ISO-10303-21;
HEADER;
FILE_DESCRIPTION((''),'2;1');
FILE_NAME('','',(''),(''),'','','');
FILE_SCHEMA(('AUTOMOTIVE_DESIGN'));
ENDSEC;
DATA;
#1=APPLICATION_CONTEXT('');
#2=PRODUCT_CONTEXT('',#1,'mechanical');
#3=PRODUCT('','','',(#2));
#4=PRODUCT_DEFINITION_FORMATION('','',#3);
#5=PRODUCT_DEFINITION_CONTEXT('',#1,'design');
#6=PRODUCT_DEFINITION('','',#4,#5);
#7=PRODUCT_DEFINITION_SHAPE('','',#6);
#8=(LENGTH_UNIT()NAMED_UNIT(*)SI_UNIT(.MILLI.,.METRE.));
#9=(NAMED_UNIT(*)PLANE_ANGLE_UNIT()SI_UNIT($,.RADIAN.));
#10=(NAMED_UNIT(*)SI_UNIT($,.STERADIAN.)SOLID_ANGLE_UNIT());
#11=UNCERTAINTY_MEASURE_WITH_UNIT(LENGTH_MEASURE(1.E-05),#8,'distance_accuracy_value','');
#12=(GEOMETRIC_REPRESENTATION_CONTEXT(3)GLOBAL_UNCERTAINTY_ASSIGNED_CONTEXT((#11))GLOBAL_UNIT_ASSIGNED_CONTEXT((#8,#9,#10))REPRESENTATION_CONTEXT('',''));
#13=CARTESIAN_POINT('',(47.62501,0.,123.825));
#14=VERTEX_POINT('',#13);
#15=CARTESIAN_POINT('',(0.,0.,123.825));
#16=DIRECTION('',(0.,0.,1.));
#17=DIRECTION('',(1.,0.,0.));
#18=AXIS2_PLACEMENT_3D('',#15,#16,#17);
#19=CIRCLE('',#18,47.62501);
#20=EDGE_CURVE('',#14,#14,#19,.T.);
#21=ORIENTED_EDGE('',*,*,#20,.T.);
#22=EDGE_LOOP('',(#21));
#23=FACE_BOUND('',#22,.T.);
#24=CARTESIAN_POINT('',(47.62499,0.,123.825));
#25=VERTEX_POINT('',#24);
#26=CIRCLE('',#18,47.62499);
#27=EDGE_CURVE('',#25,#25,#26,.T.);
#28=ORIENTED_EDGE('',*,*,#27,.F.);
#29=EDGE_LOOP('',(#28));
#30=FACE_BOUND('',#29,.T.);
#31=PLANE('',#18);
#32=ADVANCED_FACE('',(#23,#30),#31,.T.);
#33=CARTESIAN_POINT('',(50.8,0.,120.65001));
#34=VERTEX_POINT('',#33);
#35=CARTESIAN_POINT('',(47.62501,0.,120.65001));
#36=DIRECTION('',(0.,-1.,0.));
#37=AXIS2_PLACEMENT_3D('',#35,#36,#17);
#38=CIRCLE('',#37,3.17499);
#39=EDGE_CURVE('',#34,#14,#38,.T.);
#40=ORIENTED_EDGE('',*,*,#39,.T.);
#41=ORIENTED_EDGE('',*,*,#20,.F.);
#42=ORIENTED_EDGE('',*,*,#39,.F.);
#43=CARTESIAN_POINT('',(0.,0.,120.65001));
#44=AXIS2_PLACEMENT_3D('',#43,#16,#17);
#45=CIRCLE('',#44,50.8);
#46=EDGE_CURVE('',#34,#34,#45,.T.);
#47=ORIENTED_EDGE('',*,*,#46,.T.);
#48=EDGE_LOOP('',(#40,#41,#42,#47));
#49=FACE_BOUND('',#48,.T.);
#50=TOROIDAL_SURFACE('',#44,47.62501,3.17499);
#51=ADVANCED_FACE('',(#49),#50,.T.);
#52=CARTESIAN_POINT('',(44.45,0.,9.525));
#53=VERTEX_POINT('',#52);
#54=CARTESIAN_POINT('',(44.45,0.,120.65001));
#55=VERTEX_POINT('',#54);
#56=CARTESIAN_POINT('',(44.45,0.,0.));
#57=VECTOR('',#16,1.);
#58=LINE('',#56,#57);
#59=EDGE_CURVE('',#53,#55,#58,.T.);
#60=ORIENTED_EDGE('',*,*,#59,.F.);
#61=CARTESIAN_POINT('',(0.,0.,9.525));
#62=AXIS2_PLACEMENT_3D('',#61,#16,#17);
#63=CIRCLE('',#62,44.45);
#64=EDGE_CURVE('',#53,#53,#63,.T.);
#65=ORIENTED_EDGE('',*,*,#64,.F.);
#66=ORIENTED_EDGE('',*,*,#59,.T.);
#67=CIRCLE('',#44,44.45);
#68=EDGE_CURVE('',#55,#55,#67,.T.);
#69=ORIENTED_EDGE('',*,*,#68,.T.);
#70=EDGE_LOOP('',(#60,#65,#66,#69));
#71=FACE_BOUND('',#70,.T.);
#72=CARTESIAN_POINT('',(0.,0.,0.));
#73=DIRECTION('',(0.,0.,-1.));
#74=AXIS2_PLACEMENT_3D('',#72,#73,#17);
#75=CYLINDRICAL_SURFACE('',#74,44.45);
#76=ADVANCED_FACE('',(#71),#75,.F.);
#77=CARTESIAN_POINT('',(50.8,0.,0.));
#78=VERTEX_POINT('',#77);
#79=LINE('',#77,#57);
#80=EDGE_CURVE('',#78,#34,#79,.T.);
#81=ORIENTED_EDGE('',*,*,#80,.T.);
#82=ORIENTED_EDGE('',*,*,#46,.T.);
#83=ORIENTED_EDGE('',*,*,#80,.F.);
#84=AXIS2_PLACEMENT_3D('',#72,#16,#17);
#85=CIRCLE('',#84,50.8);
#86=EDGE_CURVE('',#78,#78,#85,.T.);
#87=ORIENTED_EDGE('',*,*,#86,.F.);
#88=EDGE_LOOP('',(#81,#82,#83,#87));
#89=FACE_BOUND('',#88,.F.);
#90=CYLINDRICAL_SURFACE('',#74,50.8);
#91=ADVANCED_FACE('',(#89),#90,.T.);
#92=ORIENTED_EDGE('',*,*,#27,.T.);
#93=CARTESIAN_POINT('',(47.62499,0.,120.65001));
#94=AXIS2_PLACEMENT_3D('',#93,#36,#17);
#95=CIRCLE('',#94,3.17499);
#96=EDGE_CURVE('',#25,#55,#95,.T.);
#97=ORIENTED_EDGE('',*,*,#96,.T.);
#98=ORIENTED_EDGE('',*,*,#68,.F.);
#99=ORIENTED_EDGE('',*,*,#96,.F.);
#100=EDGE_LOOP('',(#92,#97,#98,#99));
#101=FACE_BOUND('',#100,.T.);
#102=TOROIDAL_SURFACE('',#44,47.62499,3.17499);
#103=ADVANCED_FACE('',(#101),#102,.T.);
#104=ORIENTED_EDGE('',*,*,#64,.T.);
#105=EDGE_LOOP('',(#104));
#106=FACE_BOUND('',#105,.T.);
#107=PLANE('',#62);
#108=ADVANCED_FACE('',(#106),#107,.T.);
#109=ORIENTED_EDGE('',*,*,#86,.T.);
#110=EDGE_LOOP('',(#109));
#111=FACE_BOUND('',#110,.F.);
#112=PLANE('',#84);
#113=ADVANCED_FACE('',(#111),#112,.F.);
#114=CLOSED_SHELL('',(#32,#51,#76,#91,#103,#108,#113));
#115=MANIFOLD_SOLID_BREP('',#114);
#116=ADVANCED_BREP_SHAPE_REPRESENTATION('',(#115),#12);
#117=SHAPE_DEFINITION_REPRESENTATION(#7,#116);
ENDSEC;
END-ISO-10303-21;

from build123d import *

# Parameters (mm, degrees)
F0_R     = 50.8
F0_R_2   = 44.45
F1_DEPTH = 123.825
F2_R     = 44.45
F3_DEPTH = 9.525
F4_R     = 3.17499


# Not quite as in the source:
# - a fillet or chamfer is up to 0.001 mm smaller than in the source, because OpenCascade refuses the exact size
# - a feature names something its author has since deleted; it is built from what else it names


with BuildPart() as f1:
    # F0 (on Top) → F1 (new body)
    with BuildSketch(Plane.XY):
        Circle(F0_R)
        Circle(F0_R_2, mode=Mode.SUBTRACT)
    extrude(amount=F1_DEPTH)

    # F2 (on Top) → F3 (join)
    with BuildSketch(Plane.XY):
        Circle(F2_R)
    extrude(amount=F3_DEPTH)

    # F4 (radius 3.175 in the source; OpenCascade refuses exactly that, so slightly less here)
    f4_edges = [f1.edges().sort_by_distance(p)[0] for p in [
        (-44.45, 0, 123.825),
        (-50.8, 0, 123.825),
    ]]
    fillet(f4_edges, radius=F4_R)


solid = f1.part
